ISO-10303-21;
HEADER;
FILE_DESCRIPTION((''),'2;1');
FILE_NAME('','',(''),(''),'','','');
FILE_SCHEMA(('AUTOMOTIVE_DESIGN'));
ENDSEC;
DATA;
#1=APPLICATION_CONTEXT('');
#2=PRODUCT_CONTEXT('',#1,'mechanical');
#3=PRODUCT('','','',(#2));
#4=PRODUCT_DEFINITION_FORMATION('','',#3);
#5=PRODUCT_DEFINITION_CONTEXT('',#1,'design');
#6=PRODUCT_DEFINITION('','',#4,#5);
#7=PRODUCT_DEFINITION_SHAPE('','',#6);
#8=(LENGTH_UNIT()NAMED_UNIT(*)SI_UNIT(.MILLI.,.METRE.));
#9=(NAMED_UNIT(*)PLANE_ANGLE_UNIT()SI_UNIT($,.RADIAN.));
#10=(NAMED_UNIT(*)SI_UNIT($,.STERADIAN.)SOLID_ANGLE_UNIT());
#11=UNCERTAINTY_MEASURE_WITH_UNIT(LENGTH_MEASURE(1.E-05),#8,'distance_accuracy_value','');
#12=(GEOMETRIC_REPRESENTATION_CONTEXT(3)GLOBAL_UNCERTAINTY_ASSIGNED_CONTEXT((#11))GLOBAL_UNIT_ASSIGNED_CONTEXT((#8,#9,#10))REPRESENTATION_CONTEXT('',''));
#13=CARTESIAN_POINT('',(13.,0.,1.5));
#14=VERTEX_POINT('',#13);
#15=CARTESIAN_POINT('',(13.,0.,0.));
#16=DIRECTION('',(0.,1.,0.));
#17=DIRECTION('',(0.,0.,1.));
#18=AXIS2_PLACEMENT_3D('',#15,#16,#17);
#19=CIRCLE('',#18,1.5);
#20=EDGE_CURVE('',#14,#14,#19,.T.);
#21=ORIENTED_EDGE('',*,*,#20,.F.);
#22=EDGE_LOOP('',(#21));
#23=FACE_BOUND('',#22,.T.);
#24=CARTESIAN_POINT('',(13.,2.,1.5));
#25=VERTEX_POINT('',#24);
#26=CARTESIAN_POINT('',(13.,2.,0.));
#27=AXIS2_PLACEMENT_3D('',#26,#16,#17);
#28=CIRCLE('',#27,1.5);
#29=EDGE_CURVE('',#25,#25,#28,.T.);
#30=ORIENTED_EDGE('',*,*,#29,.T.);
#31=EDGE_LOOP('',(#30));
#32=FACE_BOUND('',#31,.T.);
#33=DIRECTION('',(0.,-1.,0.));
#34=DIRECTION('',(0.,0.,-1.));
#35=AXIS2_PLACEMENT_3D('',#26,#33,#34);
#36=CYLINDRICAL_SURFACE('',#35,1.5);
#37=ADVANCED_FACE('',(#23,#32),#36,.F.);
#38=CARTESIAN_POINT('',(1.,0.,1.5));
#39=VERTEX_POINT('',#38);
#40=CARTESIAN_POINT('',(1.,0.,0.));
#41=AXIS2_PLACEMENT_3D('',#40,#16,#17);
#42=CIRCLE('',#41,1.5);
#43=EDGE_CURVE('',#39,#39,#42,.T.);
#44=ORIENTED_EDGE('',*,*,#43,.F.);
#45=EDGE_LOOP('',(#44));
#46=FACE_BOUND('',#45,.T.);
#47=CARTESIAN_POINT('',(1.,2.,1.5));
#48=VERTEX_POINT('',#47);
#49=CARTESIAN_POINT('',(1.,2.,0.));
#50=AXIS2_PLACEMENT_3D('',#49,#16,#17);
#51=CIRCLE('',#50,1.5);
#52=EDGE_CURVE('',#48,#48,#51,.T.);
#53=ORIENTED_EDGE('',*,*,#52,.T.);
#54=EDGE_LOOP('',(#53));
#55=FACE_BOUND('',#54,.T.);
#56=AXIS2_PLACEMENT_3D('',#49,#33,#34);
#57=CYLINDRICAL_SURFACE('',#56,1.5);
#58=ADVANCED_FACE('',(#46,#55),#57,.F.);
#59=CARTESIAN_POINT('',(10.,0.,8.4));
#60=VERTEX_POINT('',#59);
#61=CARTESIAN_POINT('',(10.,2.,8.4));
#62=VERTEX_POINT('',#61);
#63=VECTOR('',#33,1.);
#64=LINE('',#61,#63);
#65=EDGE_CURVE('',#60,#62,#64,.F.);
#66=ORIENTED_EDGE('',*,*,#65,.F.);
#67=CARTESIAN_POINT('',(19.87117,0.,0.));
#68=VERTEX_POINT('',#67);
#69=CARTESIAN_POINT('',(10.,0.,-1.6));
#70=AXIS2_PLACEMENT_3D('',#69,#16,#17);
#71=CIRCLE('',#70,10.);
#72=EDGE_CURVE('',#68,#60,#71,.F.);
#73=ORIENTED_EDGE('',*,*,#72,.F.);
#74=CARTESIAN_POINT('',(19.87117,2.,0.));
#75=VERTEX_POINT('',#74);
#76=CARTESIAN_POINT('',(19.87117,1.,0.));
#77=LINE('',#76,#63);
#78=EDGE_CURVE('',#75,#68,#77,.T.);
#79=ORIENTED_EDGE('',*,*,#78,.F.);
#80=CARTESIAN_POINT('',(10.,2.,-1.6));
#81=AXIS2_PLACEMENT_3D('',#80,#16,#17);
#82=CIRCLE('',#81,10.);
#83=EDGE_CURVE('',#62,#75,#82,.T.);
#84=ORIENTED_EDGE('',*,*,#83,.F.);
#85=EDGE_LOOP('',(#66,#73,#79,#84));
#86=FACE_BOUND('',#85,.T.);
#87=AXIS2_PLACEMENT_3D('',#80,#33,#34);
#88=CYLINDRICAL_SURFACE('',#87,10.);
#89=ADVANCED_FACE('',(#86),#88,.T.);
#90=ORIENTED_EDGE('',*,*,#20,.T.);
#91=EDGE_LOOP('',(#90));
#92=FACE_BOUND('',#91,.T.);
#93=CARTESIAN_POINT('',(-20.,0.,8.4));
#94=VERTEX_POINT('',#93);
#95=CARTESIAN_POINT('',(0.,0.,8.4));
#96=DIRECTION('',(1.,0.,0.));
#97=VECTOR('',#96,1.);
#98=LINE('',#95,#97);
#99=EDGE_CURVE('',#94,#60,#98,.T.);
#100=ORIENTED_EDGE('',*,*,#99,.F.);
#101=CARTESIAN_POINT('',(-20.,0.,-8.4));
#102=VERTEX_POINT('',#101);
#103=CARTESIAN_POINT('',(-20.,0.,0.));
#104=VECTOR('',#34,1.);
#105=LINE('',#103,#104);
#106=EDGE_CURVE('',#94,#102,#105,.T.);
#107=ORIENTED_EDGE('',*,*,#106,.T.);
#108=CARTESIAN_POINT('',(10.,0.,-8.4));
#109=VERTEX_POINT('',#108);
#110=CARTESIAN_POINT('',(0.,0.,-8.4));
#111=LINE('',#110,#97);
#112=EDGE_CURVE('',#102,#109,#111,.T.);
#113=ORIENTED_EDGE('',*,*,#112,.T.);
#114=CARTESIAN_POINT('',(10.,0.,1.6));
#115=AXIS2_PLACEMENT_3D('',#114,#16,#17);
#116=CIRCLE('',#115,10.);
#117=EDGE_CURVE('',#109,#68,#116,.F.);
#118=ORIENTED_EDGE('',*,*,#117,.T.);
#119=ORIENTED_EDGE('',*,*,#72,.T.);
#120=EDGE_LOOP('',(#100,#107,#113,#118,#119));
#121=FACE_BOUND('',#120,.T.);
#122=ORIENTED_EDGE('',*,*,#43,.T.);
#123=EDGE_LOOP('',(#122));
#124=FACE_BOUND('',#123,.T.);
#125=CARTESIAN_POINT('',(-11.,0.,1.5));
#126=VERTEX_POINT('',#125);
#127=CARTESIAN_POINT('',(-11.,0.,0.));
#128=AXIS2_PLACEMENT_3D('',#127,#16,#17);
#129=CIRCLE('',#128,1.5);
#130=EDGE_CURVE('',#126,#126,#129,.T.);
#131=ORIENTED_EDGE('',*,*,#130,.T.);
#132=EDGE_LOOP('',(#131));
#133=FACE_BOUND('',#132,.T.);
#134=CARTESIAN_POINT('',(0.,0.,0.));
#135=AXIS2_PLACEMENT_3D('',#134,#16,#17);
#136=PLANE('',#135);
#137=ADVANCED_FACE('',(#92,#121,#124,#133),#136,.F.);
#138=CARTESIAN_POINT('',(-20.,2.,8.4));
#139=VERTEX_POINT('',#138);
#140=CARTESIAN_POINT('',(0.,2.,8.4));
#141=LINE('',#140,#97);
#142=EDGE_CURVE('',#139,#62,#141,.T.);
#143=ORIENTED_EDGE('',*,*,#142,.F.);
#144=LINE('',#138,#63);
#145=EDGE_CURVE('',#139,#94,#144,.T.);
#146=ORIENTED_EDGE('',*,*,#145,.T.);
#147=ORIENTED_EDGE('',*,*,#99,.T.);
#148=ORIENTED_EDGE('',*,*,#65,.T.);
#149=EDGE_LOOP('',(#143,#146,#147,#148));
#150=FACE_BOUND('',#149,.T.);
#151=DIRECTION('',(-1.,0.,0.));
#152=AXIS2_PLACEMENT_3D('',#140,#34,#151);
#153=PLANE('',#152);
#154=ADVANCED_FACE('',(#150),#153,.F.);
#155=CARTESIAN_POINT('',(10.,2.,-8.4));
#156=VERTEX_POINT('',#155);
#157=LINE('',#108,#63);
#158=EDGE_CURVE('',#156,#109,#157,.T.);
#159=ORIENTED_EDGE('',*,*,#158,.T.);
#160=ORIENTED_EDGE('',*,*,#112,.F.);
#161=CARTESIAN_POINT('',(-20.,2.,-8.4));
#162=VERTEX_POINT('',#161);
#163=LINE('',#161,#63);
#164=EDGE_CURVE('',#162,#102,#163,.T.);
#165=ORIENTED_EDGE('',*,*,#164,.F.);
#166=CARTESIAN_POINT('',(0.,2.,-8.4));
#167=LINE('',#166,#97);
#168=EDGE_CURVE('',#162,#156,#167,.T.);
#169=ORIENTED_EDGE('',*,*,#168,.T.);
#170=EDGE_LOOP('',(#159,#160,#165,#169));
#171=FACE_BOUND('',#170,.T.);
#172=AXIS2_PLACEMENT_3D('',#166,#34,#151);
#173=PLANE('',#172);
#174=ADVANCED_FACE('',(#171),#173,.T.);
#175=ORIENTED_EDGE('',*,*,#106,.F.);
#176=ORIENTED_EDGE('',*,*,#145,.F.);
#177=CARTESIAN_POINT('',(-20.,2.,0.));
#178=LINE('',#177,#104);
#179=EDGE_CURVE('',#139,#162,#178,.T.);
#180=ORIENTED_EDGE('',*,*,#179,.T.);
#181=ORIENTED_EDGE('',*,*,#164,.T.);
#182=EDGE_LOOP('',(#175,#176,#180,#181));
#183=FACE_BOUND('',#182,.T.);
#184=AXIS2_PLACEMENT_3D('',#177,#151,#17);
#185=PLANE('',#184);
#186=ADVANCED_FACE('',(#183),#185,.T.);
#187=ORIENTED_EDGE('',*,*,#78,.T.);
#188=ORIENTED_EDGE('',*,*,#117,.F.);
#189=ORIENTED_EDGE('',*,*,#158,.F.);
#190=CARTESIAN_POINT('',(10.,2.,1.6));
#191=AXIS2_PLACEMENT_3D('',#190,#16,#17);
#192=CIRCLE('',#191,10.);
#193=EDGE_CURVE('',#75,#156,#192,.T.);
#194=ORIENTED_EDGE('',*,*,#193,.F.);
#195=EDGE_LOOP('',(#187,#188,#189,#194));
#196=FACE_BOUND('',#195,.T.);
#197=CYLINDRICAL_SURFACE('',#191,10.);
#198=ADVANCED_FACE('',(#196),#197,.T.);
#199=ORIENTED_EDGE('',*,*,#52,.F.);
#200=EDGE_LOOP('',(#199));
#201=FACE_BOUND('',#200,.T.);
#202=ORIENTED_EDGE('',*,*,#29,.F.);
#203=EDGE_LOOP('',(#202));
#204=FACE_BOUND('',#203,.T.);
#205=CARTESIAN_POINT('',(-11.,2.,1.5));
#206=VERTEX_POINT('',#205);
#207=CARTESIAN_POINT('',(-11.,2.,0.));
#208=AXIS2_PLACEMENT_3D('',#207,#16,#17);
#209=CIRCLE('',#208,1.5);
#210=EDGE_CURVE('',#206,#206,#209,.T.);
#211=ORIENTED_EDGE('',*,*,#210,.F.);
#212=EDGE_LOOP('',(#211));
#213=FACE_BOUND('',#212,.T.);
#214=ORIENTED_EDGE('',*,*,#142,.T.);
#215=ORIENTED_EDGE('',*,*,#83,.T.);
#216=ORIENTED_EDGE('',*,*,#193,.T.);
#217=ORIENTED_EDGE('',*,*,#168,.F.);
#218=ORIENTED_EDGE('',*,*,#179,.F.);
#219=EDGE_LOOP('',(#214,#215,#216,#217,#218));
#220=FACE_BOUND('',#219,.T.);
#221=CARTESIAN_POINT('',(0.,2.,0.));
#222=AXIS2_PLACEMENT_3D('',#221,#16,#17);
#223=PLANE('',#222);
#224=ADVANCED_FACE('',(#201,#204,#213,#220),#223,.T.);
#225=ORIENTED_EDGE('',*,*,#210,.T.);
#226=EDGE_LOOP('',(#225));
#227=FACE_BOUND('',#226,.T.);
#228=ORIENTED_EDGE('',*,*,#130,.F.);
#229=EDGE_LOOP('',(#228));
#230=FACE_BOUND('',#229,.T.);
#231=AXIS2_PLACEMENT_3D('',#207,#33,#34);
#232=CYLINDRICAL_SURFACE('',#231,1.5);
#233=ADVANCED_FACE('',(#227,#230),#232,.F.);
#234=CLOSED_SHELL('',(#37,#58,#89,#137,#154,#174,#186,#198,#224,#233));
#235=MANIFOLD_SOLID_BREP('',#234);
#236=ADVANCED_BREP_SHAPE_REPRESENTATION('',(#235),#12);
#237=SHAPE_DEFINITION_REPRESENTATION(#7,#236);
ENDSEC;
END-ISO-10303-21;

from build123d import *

# Parameters (mm, degrees)
SKETCH1_W           = 40
SKETCH1_H           = 16.8
SKETCH1_R           = 1.5
BOSS_EXTRUDE1_DEPTH = 2
FILLET1_R           = 10


with BuildPart() as part:
    # Sketch1 → Boss-Extrude1 (new body)
    with BuildSketch(Plane(origin=(0, 0, 0), x_dir=(1, 0, 0), z_dir=(0, 1, 0))):
        Rectangle(SKETCH1_W, SKETCH1_H)
        with Locations(Location((-11, 0, 0), (0, 0, 270))):
            Circle(SKETCH1_R, mode=Mode.SUBTRACT)
        with Locations(Location((1, 0, 0), (0, 0, 270))):
            Circle(SKETCH1_R, mode=Mode.SUBTRACT)
        with Locations(Location((13, 0, 0), (0, 0, 270))):
            Circle(SKETCH1_R, mode=Mode.SUBTRACT)
    extrude(amount=BOSS_EXTRUDE1_DEPTH)

    # Fillet1
    # the kernel refuses this fillet: 10 mm, written as the material it takes off along each edge
    with BuildSketch(Plane(origin=(20, -25, -8.4), x_dir=(0, 0, 1), z_dir=(0, 1, 0)), Plane(origin=(20, -25, 8.4), x_dir=(-1, 0, 0), z_dir=(0, 1, 0))) as fillet1_piece_1:
        with BuildLine():
            CenterArc((FILLET1_R, -FILLET1_R), FILLET1_R, 90, 90)
            Line((0, -FILLET1_R), (0, 0))
            Line((0, 0), (FILLET1_R, 0))
        make_face()
    extrude(amount=52, mode=Mode.SUBTRACT)


solid = part.part
